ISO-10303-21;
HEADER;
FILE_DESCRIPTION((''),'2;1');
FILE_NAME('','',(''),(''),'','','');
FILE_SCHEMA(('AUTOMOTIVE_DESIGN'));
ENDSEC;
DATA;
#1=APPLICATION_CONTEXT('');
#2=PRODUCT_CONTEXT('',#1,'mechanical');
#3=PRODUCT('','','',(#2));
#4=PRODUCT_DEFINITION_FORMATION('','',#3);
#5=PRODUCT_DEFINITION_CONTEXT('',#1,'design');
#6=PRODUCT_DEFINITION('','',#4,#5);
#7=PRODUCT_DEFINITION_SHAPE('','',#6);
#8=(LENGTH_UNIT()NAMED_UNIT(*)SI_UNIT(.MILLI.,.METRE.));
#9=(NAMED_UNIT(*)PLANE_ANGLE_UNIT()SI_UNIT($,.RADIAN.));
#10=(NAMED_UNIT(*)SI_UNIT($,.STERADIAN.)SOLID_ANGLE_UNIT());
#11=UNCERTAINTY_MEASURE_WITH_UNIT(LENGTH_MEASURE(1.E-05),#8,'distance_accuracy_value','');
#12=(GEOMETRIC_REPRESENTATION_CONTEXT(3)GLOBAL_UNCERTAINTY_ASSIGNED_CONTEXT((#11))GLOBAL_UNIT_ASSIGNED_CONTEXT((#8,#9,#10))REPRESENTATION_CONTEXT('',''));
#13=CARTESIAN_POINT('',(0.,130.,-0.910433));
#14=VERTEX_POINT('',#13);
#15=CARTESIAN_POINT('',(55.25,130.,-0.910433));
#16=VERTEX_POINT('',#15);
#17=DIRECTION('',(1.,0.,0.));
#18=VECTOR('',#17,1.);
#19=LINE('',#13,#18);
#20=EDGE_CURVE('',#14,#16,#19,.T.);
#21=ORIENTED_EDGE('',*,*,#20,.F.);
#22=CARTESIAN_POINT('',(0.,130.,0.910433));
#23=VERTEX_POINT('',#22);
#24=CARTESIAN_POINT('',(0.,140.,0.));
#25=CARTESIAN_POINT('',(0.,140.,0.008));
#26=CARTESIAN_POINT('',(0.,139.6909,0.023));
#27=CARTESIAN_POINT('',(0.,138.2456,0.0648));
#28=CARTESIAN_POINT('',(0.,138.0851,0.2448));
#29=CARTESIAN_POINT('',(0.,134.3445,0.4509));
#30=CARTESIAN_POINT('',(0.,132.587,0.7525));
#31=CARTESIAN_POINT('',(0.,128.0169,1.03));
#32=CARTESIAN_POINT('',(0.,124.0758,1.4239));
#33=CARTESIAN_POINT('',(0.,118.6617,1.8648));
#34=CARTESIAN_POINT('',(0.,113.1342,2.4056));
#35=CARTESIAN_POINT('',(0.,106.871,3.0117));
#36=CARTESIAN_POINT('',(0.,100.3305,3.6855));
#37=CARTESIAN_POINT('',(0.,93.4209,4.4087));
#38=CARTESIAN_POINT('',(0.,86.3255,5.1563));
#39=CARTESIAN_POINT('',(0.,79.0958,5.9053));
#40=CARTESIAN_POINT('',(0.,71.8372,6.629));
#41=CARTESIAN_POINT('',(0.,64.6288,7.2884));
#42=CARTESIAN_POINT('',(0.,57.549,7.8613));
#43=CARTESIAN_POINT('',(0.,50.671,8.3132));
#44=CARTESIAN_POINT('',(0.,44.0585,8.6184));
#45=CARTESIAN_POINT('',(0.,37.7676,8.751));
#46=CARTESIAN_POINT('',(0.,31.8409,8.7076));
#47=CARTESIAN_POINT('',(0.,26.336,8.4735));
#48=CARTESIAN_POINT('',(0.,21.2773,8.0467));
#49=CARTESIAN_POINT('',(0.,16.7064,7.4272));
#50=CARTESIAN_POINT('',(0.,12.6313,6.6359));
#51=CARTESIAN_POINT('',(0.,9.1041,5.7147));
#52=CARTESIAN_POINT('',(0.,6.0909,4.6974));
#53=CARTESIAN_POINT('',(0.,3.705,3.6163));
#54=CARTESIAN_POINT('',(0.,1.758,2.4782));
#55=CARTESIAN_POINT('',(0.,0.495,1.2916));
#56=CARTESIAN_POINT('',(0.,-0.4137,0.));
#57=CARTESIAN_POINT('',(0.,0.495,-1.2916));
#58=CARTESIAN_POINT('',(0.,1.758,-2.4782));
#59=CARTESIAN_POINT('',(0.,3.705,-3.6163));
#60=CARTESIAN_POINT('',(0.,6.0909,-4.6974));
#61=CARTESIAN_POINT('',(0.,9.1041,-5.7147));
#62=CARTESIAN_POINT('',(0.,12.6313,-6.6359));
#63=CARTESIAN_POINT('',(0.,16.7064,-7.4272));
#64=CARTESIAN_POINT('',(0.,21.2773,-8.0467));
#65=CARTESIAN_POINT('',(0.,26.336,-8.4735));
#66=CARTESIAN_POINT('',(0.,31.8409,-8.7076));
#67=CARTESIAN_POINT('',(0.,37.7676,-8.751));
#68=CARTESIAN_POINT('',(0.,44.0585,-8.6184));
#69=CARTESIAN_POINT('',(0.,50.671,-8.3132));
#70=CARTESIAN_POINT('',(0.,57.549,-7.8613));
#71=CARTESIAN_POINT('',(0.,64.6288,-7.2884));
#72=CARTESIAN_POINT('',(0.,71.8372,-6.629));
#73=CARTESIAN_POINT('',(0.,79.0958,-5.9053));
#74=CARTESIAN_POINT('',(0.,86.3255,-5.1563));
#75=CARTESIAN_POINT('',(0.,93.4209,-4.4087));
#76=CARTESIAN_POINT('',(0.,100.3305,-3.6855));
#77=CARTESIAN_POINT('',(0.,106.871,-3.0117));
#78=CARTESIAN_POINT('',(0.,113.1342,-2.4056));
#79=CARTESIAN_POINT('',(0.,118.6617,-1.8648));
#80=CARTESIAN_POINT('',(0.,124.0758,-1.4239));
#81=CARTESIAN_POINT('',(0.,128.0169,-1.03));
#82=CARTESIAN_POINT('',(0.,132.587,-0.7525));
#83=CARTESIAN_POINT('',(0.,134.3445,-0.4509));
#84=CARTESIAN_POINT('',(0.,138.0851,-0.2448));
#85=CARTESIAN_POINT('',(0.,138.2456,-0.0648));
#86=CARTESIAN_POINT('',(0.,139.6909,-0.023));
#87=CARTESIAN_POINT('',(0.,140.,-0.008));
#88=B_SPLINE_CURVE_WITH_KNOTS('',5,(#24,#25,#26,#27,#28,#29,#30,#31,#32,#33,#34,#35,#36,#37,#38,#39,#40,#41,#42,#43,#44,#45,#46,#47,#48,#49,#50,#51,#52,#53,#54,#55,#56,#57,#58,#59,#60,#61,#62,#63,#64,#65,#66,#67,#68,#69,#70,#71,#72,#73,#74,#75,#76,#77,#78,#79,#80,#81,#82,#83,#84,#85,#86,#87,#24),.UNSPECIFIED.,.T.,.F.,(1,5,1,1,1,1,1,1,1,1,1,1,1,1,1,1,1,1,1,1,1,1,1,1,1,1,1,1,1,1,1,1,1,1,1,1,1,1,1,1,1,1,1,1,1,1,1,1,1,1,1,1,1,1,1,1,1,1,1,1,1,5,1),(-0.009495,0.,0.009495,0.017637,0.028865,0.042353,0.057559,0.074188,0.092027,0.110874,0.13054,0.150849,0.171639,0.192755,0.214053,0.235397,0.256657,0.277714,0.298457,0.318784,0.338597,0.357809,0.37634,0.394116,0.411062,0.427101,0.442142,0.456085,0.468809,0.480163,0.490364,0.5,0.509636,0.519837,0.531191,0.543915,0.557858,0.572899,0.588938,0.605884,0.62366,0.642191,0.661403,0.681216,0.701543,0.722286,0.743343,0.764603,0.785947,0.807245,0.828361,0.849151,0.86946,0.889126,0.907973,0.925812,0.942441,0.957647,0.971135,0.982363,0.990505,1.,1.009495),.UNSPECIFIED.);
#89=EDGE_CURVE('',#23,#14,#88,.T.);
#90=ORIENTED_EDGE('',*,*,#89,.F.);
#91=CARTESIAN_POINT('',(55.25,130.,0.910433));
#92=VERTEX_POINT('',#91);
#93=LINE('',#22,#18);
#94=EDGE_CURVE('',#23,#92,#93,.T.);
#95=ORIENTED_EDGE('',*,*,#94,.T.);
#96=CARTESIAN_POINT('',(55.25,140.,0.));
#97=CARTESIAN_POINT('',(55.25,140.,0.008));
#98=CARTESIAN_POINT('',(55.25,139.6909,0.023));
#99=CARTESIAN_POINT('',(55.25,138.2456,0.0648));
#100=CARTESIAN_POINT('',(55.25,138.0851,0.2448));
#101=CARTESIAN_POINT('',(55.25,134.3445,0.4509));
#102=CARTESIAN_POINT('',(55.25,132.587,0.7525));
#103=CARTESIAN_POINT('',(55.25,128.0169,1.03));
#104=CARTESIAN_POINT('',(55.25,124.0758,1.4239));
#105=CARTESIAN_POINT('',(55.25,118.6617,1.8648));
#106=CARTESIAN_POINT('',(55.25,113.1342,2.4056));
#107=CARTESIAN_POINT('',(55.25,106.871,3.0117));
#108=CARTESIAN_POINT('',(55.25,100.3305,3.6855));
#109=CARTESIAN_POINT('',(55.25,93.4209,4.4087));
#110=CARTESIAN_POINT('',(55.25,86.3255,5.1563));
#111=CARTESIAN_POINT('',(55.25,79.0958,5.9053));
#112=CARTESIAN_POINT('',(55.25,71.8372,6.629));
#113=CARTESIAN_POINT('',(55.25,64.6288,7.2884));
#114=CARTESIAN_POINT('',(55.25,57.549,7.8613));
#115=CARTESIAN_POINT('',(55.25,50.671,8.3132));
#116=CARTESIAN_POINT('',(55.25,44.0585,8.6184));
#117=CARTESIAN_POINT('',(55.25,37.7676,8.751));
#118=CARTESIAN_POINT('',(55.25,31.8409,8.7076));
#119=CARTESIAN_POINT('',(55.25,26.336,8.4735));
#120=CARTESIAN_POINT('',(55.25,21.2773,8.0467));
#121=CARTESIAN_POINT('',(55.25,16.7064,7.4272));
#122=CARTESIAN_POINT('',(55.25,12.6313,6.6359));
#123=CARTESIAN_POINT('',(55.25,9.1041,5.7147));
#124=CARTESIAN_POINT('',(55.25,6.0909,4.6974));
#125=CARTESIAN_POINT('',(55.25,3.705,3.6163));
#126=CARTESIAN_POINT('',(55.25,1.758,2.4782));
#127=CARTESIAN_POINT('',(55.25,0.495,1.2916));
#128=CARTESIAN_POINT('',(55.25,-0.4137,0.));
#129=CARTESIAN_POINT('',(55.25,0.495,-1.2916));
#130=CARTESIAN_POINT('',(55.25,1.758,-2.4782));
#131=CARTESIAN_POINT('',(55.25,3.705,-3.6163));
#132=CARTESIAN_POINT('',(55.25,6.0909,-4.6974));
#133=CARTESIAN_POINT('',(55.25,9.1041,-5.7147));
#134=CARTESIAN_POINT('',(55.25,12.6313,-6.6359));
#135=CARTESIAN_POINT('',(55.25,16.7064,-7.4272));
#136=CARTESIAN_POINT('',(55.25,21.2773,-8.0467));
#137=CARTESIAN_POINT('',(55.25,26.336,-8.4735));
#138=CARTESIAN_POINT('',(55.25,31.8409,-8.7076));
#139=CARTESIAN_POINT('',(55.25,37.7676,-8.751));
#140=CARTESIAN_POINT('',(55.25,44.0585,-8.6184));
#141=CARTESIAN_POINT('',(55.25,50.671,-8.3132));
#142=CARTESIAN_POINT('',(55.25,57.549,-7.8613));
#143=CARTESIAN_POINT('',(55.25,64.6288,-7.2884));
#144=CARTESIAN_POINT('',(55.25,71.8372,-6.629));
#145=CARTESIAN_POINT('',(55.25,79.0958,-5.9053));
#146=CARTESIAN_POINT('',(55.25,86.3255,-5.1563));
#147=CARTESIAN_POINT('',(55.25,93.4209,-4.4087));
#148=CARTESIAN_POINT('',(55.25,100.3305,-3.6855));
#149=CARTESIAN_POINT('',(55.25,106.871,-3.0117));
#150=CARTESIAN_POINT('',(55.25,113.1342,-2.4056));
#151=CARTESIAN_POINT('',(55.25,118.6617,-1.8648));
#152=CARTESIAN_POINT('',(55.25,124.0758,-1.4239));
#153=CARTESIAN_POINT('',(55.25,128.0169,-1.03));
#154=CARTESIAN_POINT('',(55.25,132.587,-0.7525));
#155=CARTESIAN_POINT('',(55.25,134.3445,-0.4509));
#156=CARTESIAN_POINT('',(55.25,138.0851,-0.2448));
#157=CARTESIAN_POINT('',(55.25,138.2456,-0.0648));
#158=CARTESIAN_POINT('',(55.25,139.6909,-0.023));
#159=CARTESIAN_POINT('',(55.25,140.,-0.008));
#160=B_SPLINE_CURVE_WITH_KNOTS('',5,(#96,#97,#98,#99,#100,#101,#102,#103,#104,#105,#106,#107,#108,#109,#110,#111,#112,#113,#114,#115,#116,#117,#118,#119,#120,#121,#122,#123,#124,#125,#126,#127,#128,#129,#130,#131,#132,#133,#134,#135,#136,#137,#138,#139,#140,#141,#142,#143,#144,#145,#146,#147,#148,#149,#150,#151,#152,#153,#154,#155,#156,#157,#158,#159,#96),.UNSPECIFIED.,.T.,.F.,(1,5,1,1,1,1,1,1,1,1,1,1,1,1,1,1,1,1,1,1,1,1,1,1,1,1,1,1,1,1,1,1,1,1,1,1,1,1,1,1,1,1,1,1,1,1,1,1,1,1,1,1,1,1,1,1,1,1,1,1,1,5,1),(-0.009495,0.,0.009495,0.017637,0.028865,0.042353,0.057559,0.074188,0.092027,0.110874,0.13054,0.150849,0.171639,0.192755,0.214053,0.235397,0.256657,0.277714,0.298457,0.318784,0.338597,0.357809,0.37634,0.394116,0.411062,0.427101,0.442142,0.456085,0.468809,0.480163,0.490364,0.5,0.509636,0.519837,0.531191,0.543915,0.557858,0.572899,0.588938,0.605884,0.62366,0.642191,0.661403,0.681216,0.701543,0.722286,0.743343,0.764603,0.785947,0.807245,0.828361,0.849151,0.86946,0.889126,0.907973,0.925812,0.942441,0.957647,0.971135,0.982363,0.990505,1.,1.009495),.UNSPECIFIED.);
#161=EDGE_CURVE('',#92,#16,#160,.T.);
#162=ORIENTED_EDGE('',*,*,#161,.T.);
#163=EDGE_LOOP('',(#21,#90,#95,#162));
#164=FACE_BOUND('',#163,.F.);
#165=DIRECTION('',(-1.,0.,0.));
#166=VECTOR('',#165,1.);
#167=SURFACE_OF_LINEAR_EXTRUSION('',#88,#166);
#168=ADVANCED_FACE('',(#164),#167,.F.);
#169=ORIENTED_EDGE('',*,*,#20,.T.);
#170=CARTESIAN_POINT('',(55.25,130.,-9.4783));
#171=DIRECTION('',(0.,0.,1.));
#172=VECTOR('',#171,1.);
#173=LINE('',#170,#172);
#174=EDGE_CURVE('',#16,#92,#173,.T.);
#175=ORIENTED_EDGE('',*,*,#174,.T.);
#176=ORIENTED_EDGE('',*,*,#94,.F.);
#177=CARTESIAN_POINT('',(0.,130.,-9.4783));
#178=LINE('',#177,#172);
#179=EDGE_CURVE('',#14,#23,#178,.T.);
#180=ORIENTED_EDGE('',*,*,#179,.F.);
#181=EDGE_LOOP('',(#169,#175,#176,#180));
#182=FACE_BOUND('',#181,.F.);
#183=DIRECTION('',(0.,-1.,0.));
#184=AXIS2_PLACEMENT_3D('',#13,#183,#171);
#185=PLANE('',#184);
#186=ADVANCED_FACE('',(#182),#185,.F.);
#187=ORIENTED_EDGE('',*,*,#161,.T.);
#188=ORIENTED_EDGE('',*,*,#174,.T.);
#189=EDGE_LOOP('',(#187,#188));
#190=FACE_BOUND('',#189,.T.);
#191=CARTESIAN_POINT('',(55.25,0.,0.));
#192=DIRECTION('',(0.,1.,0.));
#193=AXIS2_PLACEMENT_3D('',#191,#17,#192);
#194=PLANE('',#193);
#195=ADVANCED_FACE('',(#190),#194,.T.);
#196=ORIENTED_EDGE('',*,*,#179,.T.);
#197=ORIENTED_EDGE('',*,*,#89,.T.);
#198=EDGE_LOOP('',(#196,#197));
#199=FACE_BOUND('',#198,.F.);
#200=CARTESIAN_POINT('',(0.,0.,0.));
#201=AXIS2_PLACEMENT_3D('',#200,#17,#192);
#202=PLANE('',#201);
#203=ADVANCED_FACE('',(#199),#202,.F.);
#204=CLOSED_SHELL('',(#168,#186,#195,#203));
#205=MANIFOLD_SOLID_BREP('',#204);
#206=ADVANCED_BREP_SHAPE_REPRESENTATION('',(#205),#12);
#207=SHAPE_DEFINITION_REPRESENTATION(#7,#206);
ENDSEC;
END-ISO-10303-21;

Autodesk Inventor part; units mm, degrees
ref_plane "YZ Plane" through (0, 0, 0) normal (1, 0, 0) x (0, 1, 0)
ref_plane "XZ Plane" through (0, 0, 0) normal (0, 1, 0) x (-1, 0, 0)
sketch "Sketch1" plane through (0, 0, 0) normal (1, 0, 0) x (0, 1, 0)
  spline S0 degree 5 poles (140, 0) (140, 0.008) (139.6909, 0.023) (138.2456, 0.0648) (138.0851, 0.2448) (134.3445, 0.4509) (132.587, 0.7525) (128.0169, 1.03) (124.0758, 1.4239) (118.6617, 1.8648) (113.1342, 2.4056) (106.871, 3.0117) (100.3305, 3.6855) (93.4209, 4.4087) (86.3255, 5.1563) (79.0958, 5.9053) (71.8372, 6.629) (64.6288, 7.2884) (57.549, 7.8613) (50.671, 8.3132) (44.0585, 8.6184) (37.7676, 8.751) (31.8409, 8.7076) (26.336, 8.4735) (21.2773, 8.0467) (16.7064, 7.4272) (12.6313, 6.6359) (9.1041, 5.7147) (6.0909, 4.6974) (3.705, 3.6163) (1.758, 2.4782) (0.495, 1.2916) (-0.4137, 0) (0.495, -1.2916) (1.758, -2.4782) (3.705, -3.6163) (6.0909, -4.6974) (9.1041, -5.7147) (12.6313, -6.6359) (16.7064, -7.4272) (21.2773, -8.0467) (26.336, -8.4735) (31.8409, -8.7076) (37.7676, -8.751) (44.0585, -8.6184) (50.671, -8.3132) (57.549, -7.8613) (64.6288, -7.2884) (71.8372, -6.629) (79.0958, -5.9053) (86.3255, -5.1563) (93.4209, -4.4087) (100.3305, -3.6855) (106.871, -3.0117) (113.1342, -2.4056) (118.6617, -1.8648) (124.0758, -1.4239) (128.0169, -1.03) (132.587, -0.7525) (134.3445, -0.4509) (138.0851, -0.2448) (138.2456, -0.0648) (139.6909, -0.023) (140, -0.008) (140, 0) knots 0 0 0 0 0 0 0.009495 0.017637 0.028865 0.042353 0.057559 0.074188 0.092027 0.110874 0.13054 0.150849 0.171639 0.192755 0.214053 0.235397 0.256657 0.277714 0.298457 0.318784 0.338597 0.357809 0.37634 0.394116 0.411062 0.427101 0.442142 0.456085 0.468809 0.480163 0.490364 0.5 0.509636 0.519837 0.531191 0.543915 0.557858 0.572899 0.588938 0.605884 0.62366 0.642191 0.661403 0.681216 0.701543 0.722286 0.743343 0.764603 0.785947 0.807245 0.828361 0.849151 0.86946 0.889126 0.907973 0.925812 0.942441 0.957647 0.971135 0.982363 0.990505 1 1 1 1 1 1
  line L0 (130, 16.3724) -> (164.1986, 16.3724)
  line L1 (164.1986, 16.3724) -> (164.1986, -9.4783)
  line L2 (164.1986, -9.4783) -> (130, -9.4783)
  line L3 (130, -9.4783) -> (130, 16.3724)
  point P0 (138.0834, 0.1512)
  point P1 (135.8252, 0.3794)
  point P2 (132.797, 0.6664)
  point P3 (129.0044, 0.9884)
  point P4 (124.4796, 1.3706)
  point P5 (119.294, 1.8284)
  point P6 (113.526, 2.3674)
  point P7 (107.2624, 2.982)
  point P8 (100.5956, 3.661)
  point P9 (93.6194, 4.389)
  point P10 (86.4304, 5.1422)
  point P11 (79.1224, 5.8954)
  point P12 (71.785, 6.6192)
  point P13 (64.505, 7.28)
  point P14 (57.3608, 7.8484)
  point P15 (50.4266, 8.2936)
  point P16 (43.7668, 8.5876)
  point P17 (37.4346, 8.7094)
  point P18 (31.479, 8.6478)
  point P19 (25.9504, 8.393)
  point P20 (20.881, 7.9408)
  point P21 (16.2974, 7.2954)
  point P22 (12.222, 6.4778)
  point P23 (8.6772, 5.5216)
  point P24 (5.6966, 4.4618)
  point P25 (3.3082, 3.332)
  point P26 (1.533, 2.17)
  point P27 (0.4018, 1.0262)
  point P28 (0, 0)
  point P29 (0.4018, -1.0262)
  point P30 (1.533, -2.17)
  point P31 (3.3082, -3.332)
  point P32 (5.6966, -4.4618)
  point P33 (8.6772, -5.5216)
  point P34 (12.222, -6.4778)
  point P35 (16.2974, -7.2954)
  point P36 (20.881, -7.9408)
  point P37 (25.9504, -8.393)
  point P38 (31.479, -8.6478)
  point P39 (37.4346, -8.7094)
  point P40 (43.7668, -8.5876)
  point P41 (50.4266, -8.2936)
  point P42 (57.3608, -7.8484)
  point P43 (64.505, -7.28)
  point P44 (71.785, -6.6192)
  point P45 (79.1224, -5.8954)
  point P46 (86.4304, -5.1422)
  point P47 (93.6194, -4.389)
  point P48 (100.5956, -3.661)
  point P49 (107.2624, -2.982)
  point P50 (113.526, -2.3674)
  point P51 (119.294, -1.8284)
  point P52 (124.4796, -1.3706)
  point P53 (129.0044, -0.9884)
  point P54 (132.797, -0.6664)
  point P55 (135.8252, -0.3794)
  point P56 (138.0834, -0.1512)
  point P57 (139.5086, -0.0294)
  point P58 (130, -0.9104)
  point P59 (130, 0.9104)
  dimension "d9" = 130
extrude "Extrusion1" add sketch "Sketch1" along normal blind 55.25 contours L3 S0 picked at (63.1596, 2.072)
ref_plane "Work Plane11" through (27.625, 36.3757, 0) normal (0, 0, -1) x (-1, 0, 0)
ref_plane "Work Plane9" through (27.625, 36.3757, 8.7122) normal (0, 0, 1) x (1, 0, 0)
ref_plane "Work Plane10" through (27.625, 36.3757, -8.7122) normal (0, 0, -1) x (-1, 0, 0)
ref_plane "Work Plane12" through (27.625, 0, 0) normal (0, -1, 0) x (1, 0, 0)
properties part number "IISRD_Wing_Control_surface" material "EPP Foam"
